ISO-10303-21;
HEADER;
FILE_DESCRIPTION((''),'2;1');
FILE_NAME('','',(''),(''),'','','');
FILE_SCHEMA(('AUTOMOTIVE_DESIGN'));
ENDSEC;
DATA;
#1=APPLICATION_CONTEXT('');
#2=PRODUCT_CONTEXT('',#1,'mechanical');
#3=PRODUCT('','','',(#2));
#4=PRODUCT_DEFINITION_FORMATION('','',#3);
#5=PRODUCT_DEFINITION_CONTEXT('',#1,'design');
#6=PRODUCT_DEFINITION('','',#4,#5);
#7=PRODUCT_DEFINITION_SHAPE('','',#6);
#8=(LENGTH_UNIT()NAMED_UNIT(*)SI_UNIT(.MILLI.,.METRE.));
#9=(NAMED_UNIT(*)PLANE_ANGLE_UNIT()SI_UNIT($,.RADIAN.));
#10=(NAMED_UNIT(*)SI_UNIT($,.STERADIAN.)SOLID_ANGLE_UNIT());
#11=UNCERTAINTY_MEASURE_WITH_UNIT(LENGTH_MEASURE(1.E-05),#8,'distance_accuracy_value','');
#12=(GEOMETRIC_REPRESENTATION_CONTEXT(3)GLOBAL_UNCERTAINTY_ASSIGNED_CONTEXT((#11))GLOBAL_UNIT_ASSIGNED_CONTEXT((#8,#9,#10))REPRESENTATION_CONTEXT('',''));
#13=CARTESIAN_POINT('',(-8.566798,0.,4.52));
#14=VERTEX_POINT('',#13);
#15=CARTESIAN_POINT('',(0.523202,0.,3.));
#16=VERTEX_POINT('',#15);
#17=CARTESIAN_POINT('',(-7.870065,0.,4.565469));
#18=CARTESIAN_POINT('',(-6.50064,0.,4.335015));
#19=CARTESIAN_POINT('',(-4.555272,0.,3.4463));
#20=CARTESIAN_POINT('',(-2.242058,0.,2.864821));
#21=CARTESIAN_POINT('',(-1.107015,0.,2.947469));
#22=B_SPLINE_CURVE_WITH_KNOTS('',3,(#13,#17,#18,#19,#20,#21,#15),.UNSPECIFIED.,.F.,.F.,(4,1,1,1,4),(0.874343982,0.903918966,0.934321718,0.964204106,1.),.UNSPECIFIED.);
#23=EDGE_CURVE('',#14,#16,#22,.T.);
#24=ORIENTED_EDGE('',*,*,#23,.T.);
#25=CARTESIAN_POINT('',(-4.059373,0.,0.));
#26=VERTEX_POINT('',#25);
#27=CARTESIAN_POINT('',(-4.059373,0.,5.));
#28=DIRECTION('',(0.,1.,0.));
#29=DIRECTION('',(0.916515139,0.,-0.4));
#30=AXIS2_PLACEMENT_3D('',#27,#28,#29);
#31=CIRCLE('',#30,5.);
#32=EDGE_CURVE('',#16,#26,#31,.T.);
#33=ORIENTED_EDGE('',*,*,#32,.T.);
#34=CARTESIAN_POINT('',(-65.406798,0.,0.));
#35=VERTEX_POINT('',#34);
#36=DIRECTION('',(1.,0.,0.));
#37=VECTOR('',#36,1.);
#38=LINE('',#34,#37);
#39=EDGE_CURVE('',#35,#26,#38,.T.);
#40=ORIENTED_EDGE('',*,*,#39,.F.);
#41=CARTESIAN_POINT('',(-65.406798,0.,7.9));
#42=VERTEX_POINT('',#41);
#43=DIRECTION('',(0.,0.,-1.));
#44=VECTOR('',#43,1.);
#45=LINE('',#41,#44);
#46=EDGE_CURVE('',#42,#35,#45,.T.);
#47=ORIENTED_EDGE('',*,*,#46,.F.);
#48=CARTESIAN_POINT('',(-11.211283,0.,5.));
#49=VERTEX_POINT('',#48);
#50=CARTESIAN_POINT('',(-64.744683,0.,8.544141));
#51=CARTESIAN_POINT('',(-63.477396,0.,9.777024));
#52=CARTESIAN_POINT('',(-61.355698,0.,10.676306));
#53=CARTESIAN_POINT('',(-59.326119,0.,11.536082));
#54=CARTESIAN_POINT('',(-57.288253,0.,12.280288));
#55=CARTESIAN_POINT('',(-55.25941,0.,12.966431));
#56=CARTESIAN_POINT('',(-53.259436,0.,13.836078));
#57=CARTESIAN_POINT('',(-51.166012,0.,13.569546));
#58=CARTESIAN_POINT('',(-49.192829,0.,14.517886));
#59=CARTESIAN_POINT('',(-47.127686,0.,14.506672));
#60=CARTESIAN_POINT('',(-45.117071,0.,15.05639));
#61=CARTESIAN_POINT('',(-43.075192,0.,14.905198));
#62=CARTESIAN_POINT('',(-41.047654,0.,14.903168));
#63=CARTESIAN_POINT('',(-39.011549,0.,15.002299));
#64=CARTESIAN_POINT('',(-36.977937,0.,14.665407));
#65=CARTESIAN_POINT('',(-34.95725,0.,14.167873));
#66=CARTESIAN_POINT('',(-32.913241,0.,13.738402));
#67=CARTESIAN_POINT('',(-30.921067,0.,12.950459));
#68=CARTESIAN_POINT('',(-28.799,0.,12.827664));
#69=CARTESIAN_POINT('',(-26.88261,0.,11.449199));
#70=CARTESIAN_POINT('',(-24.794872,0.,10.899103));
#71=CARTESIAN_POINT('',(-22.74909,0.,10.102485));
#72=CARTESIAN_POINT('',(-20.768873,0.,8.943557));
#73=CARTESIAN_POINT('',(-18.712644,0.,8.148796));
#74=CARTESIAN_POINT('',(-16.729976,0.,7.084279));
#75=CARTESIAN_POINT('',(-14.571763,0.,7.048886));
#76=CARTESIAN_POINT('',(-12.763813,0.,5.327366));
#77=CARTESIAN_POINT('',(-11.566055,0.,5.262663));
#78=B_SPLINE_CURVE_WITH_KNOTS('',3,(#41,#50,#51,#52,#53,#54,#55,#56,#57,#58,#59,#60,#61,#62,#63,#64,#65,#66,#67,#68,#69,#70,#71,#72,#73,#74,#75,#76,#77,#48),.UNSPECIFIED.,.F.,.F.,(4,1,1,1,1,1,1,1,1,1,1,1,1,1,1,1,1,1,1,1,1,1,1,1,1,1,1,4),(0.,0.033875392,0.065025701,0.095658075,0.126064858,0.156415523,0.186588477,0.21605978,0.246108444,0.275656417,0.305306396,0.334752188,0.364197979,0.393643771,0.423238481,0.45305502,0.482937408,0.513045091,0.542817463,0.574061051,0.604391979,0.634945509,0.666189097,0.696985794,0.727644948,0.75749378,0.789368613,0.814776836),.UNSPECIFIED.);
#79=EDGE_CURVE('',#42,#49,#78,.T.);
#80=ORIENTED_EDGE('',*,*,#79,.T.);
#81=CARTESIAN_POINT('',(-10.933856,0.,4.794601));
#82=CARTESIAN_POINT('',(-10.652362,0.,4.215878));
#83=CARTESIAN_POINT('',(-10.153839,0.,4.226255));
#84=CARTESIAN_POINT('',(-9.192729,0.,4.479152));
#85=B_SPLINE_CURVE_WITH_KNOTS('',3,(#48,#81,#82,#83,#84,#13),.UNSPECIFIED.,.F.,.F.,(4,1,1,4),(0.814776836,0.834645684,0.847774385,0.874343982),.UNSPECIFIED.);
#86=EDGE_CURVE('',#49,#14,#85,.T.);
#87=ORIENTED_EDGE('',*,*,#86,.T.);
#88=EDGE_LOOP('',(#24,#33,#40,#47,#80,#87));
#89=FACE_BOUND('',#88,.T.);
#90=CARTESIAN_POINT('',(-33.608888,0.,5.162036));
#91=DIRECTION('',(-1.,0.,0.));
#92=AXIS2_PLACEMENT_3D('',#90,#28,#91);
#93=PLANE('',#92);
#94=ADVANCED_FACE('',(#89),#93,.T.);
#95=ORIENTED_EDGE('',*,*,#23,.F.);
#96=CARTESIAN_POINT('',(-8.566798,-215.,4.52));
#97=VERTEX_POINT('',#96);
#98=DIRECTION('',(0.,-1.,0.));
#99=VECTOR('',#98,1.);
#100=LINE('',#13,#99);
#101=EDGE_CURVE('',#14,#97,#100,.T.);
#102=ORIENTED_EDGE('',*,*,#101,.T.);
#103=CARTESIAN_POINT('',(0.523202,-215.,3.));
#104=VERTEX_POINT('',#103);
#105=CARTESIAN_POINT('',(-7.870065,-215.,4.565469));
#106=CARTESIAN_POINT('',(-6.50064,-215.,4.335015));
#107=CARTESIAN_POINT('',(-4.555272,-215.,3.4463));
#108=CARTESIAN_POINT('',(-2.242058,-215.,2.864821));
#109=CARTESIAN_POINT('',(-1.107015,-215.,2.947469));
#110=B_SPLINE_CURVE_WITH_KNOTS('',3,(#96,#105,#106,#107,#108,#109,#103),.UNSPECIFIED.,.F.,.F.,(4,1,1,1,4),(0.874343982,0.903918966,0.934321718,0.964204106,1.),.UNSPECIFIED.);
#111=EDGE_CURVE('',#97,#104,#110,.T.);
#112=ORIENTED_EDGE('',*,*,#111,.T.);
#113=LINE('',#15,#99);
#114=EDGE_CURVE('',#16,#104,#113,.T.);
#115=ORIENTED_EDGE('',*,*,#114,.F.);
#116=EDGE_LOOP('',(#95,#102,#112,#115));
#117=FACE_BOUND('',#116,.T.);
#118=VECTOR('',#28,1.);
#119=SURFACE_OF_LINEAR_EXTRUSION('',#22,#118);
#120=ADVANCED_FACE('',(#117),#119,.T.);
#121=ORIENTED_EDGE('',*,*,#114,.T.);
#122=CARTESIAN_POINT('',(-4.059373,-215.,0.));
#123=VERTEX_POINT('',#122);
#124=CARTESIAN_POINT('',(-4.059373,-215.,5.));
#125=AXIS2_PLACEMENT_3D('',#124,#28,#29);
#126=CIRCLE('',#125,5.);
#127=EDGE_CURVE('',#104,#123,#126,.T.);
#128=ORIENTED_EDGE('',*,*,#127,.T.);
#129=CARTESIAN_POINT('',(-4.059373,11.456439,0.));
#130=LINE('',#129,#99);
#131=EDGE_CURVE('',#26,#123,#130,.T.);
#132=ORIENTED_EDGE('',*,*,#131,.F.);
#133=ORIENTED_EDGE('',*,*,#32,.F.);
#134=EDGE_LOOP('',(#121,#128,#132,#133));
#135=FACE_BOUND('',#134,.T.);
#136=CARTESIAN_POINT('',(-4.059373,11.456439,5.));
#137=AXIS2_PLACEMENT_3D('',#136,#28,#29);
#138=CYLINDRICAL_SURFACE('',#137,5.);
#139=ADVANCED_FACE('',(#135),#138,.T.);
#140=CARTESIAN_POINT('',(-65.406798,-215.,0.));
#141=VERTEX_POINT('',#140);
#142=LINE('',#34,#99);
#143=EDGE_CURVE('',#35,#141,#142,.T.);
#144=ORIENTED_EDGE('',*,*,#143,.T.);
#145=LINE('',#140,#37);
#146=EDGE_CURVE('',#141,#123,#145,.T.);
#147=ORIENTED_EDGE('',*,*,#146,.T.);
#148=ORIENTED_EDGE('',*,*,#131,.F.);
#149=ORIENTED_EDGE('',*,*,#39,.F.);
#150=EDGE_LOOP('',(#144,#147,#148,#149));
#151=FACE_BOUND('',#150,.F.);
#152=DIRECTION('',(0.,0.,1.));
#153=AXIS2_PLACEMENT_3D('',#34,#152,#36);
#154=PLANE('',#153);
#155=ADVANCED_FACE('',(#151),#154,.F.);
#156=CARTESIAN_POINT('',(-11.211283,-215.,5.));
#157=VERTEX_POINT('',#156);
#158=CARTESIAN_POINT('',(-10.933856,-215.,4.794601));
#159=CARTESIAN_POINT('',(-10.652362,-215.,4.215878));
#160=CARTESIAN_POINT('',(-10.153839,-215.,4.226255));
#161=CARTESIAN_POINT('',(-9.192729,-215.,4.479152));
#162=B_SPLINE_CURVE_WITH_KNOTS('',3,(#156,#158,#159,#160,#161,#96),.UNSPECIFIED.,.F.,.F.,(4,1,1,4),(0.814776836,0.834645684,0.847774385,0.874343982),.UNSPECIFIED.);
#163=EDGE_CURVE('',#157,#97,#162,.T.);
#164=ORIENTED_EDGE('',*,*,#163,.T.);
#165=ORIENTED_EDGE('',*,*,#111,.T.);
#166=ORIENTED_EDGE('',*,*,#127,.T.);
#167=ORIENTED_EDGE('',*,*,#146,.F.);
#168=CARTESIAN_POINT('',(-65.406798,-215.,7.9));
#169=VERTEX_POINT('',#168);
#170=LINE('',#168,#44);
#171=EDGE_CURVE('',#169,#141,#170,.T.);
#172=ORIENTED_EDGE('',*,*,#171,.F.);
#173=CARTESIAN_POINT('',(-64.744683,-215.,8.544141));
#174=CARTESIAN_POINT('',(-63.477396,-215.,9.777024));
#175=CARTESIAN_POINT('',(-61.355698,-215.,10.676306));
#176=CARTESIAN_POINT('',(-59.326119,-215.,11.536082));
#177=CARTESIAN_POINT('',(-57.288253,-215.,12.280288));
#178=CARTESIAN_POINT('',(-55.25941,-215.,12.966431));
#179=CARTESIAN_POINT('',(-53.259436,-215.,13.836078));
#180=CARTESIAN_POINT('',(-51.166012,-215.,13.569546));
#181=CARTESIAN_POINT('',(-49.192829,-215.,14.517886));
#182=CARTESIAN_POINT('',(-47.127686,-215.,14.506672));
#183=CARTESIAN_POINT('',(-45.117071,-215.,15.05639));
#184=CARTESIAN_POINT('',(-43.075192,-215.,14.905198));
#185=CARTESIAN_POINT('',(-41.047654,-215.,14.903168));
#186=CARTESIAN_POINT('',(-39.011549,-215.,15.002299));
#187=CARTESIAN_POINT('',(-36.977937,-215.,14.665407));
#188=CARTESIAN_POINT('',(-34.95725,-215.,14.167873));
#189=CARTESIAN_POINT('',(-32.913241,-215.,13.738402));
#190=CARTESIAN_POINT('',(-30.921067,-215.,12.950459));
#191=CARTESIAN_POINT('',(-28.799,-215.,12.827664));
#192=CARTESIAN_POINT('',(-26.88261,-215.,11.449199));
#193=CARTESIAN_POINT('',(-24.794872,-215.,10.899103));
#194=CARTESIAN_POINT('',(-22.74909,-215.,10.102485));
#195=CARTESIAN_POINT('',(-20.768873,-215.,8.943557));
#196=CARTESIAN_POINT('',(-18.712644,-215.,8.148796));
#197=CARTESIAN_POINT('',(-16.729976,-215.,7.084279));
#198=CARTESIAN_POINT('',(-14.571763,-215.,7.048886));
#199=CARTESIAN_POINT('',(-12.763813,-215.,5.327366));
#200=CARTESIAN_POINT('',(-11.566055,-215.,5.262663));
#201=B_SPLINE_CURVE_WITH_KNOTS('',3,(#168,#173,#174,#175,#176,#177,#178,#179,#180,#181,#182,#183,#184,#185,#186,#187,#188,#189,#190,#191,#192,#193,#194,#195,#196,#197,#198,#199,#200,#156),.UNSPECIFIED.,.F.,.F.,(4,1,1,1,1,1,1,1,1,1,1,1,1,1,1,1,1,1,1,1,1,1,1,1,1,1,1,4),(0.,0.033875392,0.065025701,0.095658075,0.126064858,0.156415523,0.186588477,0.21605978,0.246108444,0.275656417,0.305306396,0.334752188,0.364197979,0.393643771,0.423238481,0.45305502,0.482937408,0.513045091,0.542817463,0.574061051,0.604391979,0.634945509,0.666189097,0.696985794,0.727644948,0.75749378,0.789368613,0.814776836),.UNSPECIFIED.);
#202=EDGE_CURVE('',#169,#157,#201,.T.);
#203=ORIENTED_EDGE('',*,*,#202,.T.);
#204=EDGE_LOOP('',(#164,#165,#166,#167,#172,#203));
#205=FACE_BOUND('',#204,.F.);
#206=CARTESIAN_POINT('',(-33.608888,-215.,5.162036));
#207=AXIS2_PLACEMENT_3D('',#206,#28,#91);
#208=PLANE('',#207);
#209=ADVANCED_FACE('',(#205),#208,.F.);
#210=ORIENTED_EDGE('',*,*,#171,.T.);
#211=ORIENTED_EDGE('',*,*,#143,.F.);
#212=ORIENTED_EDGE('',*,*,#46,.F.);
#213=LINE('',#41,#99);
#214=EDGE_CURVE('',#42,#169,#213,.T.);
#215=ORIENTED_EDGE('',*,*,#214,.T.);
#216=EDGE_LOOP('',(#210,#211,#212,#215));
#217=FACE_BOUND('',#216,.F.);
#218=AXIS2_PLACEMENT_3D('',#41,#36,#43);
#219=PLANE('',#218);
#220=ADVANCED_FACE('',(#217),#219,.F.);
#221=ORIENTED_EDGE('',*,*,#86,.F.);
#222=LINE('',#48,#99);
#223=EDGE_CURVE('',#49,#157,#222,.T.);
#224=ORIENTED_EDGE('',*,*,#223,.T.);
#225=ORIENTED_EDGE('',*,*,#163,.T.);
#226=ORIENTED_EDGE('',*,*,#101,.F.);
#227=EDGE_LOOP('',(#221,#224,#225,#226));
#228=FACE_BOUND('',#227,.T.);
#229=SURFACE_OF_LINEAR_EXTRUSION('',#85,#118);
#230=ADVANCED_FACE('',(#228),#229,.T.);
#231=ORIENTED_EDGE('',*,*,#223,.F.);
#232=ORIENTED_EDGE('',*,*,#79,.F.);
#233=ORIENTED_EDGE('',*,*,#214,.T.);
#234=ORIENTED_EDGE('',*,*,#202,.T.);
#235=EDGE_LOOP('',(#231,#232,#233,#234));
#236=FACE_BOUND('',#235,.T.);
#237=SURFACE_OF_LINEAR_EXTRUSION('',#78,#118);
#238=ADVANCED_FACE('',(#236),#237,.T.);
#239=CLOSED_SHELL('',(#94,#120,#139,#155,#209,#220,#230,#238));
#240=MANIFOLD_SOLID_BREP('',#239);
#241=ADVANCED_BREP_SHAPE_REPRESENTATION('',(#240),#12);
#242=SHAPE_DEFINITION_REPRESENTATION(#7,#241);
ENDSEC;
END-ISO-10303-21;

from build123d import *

# Parameters (mm, degrees)
F1_DEPTH    = 215
F2_T1_DEPTH = 237.9128784748


# Not quite as in the source:
# - a fillet or chamfer that OpenCascade refuses, or shapes differently, is made with other operations: its cross-section is extruded or revolved along the edge and cut away or added


with BuildPart() as f1:
    # F0 (on Front) → F1 (new body)
    with BuildSketch(Plane.XZ):
        with BuildLine():
            add(Edge.make_bspline(
                [(-65.4067975488, 7.9), (-64.7446827642, 8.5441405082), (-63.477396389, 9.7770241543), (-61.3556983755, 10.6763060463), (-59.3261192012, 11.536081627), (-57.2882532943, 12.2802882653), (-55.2594103899, 12.9664310821), (-53.2594358742, 13.8360781513), (-51.1660118118, 13.5695464853), (-49.1928290211, 14.5178863994), (-47.1276857108, 14.506671967), (-45.1170711888, 15.0563899138), (-43.075192109, 14.9051977862), (-41.0476544737, 14.9031676075), (-39.0115486283, 15.0022986162), (-36.9779374337, 14.6654074526), (-34.9572495613, 14.1678726088), (-32.91324085, 13.7384022898), (-30.9210670552, 12.9504590852), (-28.7989996539, 12.8276635908), (-26.8826100013, 11.4491985592), (-24.7948716824, 10.8991034099), (-22.7490904289, 10.1024848406), (-20.7688732719, 8.9435573213), (-18.7126441336, 8.148796087), (-16.7299758299, 7.0842785912), (-14.5717633458, 7.0488862609), (-12.7638127336, 5.3273663002), (-11.5660546149, 5.2626631044), (-11.2112825736, 5)],
                knots=[0, 0, 0, 0, 0.0338753916, 0.0650257007, 0.0956580751, 0.1260648577, 0.1564155231, 0.1865884769, 0.21605978, 0.2461084444, 0.2756564169, 0.3053063957, 0.3347521875, 0.3641979794, 0.3936437713, 0.423238481, 0.4530550197, 0.4829374078, 0.513045091, 0.5428174627, 0.574061051, 0.604391979, 0.6349455091, 0.6661890973, 0.6969857938, 0.7276449479, 0.7574937799, 0.7893686126, 0.8147768362, 0.8147768362, 0.8147768362, 0.8147768362], degree=3))
            Line((-65.4067975488, 7.9), (-65.4067975488, 0))
            Line((-65.4067975488, 0), (0.5232024512, 0))
            Line((0.5232024512, 0), (0.5232024512, 3))
            add(Edge.make_bspline(
                [(-8.5667975488, 4.52), (-7.8700649184, 4.5654690193), (-6.5006401691, 4.3350148914), (-4.5552721521, 3.4462995441), (-2.2420579262, 2.8648207953), (-1.1070154242, 2.947469133), (0.5232024512, 3)],
                knots=[0.8743439824, 0.8743439824, 0.8743439824, 0.8743439824, 0.903918966, 0.934321718, 0.9642041061, 1, 1, 1, 1], degree=3))
            add(Edge.make_bspline(
                [(-11.2112825736, 5), (-10.933856182, 4.7946014094), (-10.6523620488, 4.2158777781), (-10.1538388519, 4.2262545919), (-9.192728764, 4.4791515062), (-8.5667975488, 4.52)],
                knots=[0.8147768362, 0.8147768362, 0.8147768362, 0.8147768362, 0.8346456843, 0.847774385, 0.8743439824, 0.8743439824, 0.8743439824, 0.8743439824], degree=3))
        make_face()
    extrude(amount=F1_DEPTH)

    # F2: fillet of radius 5 on 1 edges, made by hand

    # F2_s2 → F2_t1 (cut)
    with BuildSketch(Plane.XZ.offset(-11.4564392374)):
        with BuildLine():
            ThreePointArc((0.5232024512, 3), (-1.3207604562, 0.8166998673), (-4.0593732438, 0))
            Line((-4.0593732438, 0), (0.5232024512, 0))
            Line((0.5232024512, 0), (0.5232024512, 3))
        make_face()
    extrude(amount=F2_T1_DEPTH, mode=Mode.SUBTRACT)


solid = f1.part
